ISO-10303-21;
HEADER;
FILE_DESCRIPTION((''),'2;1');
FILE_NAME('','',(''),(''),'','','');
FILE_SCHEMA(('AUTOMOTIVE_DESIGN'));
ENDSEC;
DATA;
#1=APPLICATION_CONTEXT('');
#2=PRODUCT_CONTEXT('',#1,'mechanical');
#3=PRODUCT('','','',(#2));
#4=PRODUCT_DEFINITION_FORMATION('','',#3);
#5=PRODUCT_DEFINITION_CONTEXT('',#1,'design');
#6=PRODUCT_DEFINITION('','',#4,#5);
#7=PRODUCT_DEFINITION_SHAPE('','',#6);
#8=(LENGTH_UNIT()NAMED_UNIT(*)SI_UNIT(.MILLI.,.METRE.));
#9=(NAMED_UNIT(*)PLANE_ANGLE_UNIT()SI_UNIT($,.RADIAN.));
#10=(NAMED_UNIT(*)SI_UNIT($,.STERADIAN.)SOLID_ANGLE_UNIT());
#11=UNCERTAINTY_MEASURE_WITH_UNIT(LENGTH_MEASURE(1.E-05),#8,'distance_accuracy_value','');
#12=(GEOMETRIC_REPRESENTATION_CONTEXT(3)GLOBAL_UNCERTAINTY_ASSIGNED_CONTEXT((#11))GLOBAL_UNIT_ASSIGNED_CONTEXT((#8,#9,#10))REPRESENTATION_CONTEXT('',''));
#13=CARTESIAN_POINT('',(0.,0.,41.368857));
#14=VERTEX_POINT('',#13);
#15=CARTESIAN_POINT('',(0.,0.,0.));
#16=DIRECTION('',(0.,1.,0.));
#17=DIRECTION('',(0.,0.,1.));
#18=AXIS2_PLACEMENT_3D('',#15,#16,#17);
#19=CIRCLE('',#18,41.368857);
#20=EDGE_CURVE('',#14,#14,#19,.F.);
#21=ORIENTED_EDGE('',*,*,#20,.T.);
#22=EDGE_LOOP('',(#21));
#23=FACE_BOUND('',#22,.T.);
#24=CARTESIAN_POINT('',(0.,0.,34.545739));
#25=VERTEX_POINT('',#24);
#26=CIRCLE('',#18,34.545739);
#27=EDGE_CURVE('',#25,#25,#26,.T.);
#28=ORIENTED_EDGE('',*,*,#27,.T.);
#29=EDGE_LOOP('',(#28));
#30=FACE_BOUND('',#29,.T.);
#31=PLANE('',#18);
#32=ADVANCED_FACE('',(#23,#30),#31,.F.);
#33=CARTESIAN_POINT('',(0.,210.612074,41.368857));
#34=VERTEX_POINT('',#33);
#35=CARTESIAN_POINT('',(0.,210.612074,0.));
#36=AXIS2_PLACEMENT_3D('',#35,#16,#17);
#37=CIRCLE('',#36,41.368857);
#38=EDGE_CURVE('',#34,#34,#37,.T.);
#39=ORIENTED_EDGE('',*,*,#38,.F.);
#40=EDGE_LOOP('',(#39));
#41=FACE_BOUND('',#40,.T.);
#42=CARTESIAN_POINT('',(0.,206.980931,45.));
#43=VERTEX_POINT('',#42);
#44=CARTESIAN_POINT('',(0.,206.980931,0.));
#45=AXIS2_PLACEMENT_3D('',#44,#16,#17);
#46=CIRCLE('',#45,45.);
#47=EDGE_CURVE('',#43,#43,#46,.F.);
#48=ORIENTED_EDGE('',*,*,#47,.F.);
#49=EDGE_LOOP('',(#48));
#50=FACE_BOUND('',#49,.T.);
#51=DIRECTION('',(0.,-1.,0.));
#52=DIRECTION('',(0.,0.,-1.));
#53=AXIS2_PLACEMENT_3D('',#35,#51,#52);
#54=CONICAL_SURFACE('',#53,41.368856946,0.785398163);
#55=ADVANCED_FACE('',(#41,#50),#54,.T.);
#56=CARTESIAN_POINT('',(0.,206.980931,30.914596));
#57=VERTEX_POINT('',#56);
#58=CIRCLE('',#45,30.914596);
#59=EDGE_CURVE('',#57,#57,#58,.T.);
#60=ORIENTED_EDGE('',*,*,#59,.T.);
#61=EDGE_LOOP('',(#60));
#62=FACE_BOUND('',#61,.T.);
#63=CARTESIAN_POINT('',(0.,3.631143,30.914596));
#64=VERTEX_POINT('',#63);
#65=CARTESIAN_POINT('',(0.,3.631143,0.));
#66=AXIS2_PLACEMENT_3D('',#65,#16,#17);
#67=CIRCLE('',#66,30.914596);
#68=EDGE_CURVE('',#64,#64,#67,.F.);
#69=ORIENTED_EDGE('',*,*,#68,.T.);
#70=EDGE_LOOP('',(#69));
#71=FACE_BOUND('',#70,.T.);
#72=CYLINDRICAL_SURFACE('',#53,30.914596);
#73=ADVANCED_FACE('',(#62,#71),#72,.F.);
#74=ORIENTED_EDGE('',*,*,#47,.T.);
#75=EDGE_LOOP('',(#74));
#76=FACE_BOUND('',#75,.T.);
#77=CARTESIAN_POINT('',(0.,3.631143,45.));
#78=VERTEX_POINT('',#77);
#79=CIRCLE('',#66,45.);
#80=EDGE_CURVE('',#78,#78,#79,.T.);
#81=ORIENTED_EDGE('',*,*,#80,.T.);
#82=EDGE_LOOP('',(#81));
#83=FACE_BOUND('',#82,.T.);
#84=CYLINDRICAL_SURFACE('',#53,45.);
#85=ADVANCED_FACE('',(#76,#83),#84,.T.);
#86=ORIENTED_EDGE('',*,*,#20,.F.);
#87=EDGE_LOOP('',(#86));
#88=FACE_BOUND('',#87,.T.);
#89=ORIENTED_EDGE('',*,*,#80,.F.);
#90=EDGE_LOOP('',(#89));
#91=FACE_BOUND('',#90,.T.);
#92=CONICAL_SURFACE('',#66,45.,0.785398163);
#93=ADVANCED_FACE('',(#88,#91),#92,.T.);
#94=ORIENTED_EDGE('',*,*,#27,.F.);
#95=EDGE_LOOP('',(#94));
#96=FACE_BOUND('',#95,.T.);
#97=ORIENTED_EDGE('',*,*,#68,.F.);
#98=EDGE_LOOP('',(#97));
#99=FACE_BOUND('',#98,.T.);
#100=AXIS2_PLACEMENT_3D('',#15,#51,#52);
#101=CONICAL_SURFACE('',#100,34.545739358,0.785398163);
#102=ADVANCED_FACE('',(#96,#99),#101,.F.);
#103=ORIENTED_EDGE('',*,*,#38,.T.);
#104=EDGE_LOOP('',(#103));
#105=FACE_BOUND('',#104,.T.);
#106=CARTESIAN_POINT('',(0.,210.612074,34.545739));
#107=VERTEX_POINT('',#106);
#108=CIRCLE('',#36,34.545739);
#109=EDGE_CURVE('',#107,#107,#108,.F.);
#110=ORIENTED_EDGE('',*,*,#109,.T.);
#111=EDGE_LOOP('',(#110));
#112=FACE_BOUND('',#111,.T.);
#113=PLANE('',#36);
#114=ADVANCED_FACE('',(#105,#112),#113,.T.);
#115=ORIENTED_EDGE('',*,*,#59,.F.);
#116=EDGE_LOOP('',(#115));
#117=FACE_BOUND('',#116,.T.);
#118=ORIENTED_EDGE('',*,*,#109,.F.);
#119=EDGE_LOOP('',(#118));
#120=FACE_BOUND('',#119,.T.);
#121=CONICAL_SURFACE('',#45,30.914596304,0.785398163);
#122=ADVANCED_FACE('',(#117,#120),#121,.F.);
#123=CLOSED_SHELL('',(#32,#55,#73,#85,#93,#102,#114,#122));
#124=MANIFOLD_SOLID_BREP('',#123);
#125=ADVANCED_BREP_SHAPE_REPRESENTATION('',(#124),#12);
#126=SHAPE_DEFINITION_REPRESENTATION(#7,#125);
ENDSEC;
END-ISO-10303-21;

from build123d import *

# Parameters (mm, degrees)
SKETCH1_R           = 45
BOSS_EXTRUDE1_DEPTH = 210.612073648
SKETCH2_R           = 30.914596304
CUT_EXTRUDE1_DEPTH  = 221.01692109
CHAMFER1_SIZE       = 3.631143054


with BuildPart() as part:
    # Sketch1 → Boss-Extrude1 (new body)
    with BuildSketch(Plane(origin=(0, 0, 0), x_dir=(1, 0, 0), z_dir=(0, 1, 0))):
        Circle(SKETCH1_R)
    extrude(amount=BOSS_EXTRUDE1_DEPTH)

    # Sketch2 → Cut-Extrude1 (cut, through all)
    with BuildSketch(Plane(origin=(0, 0, 0), x_dir=(1, 0, 0), z_dir=(0, 1, 0))):
        Circle(SKETCH2_R)
    extrude(amount=CUT_EXTRUDE1_DEPTH, mode=Mode.SUBTRACT)

    # Chamfer1
    chamfer1_edges = [part.edges().sort_by_distance(p)[0] for p in [
        (-30.914596304, 210.612073648, 0),
        (-30.914596304, 0, 0),
        (-45, 0, 0),
        (-45, 210.612073648, 0),
    ]]
    chamfer(chamfer1_edges, length=CHAMFER1_SIZE)


solid = part.part
